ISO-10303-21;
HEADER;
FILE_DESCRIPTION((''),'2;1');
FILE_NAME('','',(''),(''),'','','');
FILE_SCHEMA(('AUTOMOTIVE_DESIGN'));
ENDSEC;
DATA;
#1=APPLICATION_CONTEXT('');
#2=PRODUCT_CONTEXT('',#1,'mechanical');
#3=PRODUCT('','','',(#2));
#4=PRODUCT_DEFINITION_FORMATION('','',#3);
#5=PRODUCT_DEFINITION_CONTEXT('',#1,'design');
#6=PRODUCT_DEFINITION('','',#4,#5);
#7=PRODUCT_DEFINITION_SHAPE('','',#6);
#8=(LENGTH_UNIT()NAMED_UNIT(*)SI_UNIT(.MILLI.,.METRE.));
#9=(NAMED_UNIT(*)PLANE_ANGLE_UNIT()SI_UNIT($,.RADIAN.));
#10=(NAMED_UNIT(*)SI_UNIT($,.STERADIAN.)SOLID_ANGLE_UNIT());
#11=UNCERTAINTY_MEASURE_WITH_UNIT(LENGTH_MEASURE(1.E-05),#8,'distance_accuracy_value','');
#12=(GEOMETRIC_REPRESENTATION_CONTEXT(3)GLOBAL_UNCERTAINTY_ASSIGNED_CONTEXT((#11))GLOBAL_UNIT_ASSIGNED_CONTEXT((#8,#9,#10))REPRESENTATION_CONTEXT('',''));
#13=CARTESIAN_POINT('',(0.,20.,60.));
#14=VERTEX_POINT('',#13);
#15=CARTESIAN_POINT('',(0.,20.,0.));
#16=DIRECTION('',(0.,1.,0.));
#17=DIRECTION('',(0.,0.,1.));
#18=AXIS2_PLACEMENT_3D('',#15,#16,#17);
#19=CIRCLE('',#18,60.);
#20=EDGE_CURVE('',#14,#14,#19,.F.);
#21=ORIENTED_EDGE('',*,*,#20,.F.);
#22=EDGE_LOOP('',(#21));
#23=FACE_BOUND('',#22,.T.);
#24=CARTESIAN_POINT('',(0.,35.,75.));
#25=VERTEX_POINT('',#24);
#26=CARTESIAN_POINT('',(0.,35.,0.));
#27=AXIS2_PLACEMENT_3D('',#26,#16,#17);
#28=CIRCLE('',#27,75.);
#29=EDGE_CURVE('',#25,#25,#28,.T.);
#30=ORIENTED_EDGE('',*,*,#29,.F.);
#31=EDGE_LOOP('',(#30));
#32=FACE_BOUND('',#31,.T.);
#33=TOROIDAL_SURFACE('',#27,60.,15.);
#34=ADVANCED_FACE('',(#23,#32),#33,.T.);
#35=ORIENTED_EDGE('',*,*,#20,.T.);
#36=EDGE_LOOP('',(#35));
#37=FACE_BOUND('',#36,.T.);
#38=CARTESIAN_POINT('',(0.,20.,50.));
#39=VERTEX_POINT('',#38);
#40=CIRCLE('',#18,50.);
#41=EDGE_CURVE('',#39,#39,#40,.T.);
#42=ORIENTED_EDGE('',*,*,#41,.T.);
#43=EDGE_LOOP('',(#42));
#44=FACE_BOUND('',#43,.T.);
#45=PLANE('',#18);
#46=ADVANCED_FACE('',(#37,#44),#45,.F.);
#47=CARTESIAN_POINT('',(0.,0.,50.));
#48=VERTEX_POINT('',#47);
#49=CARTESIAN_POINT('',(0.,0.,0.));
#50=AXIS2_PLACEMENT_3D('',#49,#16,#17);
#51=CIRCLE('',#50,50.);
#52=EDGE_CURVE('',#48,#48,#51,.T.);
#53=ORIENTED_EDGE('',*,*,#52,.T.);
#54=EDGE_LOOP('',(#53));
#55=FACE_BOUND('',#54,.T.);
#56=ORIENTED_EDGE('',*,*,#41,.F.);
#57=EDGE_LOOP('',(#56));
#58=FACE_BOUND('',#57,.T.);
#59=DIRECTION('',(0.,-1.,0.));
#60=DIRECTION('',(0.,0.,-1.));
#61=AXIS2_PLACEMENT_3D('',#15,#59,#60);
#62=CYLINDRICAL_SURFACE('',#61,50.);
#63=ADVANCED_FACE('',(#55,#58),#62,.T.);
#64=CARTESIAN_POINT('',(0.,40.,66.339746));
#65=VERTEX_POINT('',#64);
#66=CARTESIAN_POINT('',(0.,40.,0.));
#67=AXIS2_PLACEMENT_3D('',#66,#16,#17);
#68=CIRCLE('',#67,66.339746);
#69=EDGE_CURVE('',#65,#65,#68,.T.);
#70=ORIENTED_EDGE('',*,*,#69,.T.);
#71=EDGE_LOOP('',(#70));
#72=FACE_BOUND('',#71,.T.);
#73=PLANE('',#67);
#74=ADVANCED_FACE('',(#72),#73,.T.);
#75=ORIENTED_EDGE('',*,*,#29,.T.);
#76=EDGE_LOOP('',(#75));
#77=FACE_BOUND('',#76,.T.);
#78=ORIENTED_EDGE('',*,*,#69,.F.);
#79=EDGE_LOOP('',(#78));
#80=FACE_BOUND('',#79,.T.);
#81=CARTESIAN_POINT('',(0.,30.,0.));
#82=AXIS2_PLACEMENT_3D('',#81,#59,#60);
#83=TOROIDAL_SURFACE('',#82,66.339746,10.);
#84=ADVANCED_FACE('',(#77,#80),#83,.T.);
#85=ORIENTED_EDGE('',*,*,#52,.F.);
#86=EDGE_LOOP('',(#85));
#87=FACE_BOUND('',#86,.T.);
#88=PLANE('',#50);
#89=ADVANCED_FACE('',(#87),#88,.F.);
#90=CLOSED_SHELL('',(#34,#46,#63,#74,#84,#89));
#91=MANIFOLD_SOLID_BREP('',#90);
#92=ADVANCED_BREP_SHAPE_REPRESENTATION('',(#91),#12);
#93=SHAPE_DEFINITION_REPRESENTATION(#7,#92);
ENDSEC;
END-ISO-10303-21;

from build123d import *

# Parameters (mm, degrees)
SKETCH1_R           = 50
BOSS_EXTRUDE1_DEPTH = 20
SKETCH2_R           = 75
BOSS_EXTRUDE2_DEPTH = 20
FILLET1_R           = 15
FILLET3_R           = 10


with BuildPart() as part:
    # Sketch1 → Boss-Extrude1 (new body)
    with BuildSketch(Plane(origin=(0, 0, 0), x_dir=(1, 0, 0), z_dir=(0, 1, 0))):
        with Locations(Location((0, 0, 0), (0, 0, 270))):
            Circle(SKETCH1_R)
    extrude(amount=BOSS_EXTRUDE1_DEPTH)

    # Sketch2 → Boss-Extrude2 (add)
    with BuildSketch(Plane(origin=(0, 20, 0), x_dir=(1, 0, 0), z_dir=(0, 1, 0))):
        with Locations(Location((0, 0, 0), (0, 0, 270))):
            Circle(SKETCH2_R)
    extrude(amount=BOSS_EXTRUDE2_DEPTH)

    # Fillet1
    fillet1_edges = [part.edges().sort_by_distance(p)[0] for p in [
        (0, 20, -75),
    ]]
    fillet(fillet1_edges, radius=FILLET1_R)

    # Fillet3
    # the kernel refuses this fillet: 10 mm, written as the material it takes off along each edge
    with BuildSketch(Plane(origin=(0, 40, 0), x_dir=(0, 0, 1), z_dir=(-1, 0, 0))) as fillet3_piece_1:
        with BuildLine():
            CenterArc((66.339745962, -10), FILLET3_R, 30, 60)
            Line((66.339745962, 0), (75, 0))
            Line((75, 0), (75, -5))
        make_face()
    revolve(axis=Axis((0, 40, 0), (0, 1, 0)), mode=Mode.SUBTRACT)


solid = part.part
